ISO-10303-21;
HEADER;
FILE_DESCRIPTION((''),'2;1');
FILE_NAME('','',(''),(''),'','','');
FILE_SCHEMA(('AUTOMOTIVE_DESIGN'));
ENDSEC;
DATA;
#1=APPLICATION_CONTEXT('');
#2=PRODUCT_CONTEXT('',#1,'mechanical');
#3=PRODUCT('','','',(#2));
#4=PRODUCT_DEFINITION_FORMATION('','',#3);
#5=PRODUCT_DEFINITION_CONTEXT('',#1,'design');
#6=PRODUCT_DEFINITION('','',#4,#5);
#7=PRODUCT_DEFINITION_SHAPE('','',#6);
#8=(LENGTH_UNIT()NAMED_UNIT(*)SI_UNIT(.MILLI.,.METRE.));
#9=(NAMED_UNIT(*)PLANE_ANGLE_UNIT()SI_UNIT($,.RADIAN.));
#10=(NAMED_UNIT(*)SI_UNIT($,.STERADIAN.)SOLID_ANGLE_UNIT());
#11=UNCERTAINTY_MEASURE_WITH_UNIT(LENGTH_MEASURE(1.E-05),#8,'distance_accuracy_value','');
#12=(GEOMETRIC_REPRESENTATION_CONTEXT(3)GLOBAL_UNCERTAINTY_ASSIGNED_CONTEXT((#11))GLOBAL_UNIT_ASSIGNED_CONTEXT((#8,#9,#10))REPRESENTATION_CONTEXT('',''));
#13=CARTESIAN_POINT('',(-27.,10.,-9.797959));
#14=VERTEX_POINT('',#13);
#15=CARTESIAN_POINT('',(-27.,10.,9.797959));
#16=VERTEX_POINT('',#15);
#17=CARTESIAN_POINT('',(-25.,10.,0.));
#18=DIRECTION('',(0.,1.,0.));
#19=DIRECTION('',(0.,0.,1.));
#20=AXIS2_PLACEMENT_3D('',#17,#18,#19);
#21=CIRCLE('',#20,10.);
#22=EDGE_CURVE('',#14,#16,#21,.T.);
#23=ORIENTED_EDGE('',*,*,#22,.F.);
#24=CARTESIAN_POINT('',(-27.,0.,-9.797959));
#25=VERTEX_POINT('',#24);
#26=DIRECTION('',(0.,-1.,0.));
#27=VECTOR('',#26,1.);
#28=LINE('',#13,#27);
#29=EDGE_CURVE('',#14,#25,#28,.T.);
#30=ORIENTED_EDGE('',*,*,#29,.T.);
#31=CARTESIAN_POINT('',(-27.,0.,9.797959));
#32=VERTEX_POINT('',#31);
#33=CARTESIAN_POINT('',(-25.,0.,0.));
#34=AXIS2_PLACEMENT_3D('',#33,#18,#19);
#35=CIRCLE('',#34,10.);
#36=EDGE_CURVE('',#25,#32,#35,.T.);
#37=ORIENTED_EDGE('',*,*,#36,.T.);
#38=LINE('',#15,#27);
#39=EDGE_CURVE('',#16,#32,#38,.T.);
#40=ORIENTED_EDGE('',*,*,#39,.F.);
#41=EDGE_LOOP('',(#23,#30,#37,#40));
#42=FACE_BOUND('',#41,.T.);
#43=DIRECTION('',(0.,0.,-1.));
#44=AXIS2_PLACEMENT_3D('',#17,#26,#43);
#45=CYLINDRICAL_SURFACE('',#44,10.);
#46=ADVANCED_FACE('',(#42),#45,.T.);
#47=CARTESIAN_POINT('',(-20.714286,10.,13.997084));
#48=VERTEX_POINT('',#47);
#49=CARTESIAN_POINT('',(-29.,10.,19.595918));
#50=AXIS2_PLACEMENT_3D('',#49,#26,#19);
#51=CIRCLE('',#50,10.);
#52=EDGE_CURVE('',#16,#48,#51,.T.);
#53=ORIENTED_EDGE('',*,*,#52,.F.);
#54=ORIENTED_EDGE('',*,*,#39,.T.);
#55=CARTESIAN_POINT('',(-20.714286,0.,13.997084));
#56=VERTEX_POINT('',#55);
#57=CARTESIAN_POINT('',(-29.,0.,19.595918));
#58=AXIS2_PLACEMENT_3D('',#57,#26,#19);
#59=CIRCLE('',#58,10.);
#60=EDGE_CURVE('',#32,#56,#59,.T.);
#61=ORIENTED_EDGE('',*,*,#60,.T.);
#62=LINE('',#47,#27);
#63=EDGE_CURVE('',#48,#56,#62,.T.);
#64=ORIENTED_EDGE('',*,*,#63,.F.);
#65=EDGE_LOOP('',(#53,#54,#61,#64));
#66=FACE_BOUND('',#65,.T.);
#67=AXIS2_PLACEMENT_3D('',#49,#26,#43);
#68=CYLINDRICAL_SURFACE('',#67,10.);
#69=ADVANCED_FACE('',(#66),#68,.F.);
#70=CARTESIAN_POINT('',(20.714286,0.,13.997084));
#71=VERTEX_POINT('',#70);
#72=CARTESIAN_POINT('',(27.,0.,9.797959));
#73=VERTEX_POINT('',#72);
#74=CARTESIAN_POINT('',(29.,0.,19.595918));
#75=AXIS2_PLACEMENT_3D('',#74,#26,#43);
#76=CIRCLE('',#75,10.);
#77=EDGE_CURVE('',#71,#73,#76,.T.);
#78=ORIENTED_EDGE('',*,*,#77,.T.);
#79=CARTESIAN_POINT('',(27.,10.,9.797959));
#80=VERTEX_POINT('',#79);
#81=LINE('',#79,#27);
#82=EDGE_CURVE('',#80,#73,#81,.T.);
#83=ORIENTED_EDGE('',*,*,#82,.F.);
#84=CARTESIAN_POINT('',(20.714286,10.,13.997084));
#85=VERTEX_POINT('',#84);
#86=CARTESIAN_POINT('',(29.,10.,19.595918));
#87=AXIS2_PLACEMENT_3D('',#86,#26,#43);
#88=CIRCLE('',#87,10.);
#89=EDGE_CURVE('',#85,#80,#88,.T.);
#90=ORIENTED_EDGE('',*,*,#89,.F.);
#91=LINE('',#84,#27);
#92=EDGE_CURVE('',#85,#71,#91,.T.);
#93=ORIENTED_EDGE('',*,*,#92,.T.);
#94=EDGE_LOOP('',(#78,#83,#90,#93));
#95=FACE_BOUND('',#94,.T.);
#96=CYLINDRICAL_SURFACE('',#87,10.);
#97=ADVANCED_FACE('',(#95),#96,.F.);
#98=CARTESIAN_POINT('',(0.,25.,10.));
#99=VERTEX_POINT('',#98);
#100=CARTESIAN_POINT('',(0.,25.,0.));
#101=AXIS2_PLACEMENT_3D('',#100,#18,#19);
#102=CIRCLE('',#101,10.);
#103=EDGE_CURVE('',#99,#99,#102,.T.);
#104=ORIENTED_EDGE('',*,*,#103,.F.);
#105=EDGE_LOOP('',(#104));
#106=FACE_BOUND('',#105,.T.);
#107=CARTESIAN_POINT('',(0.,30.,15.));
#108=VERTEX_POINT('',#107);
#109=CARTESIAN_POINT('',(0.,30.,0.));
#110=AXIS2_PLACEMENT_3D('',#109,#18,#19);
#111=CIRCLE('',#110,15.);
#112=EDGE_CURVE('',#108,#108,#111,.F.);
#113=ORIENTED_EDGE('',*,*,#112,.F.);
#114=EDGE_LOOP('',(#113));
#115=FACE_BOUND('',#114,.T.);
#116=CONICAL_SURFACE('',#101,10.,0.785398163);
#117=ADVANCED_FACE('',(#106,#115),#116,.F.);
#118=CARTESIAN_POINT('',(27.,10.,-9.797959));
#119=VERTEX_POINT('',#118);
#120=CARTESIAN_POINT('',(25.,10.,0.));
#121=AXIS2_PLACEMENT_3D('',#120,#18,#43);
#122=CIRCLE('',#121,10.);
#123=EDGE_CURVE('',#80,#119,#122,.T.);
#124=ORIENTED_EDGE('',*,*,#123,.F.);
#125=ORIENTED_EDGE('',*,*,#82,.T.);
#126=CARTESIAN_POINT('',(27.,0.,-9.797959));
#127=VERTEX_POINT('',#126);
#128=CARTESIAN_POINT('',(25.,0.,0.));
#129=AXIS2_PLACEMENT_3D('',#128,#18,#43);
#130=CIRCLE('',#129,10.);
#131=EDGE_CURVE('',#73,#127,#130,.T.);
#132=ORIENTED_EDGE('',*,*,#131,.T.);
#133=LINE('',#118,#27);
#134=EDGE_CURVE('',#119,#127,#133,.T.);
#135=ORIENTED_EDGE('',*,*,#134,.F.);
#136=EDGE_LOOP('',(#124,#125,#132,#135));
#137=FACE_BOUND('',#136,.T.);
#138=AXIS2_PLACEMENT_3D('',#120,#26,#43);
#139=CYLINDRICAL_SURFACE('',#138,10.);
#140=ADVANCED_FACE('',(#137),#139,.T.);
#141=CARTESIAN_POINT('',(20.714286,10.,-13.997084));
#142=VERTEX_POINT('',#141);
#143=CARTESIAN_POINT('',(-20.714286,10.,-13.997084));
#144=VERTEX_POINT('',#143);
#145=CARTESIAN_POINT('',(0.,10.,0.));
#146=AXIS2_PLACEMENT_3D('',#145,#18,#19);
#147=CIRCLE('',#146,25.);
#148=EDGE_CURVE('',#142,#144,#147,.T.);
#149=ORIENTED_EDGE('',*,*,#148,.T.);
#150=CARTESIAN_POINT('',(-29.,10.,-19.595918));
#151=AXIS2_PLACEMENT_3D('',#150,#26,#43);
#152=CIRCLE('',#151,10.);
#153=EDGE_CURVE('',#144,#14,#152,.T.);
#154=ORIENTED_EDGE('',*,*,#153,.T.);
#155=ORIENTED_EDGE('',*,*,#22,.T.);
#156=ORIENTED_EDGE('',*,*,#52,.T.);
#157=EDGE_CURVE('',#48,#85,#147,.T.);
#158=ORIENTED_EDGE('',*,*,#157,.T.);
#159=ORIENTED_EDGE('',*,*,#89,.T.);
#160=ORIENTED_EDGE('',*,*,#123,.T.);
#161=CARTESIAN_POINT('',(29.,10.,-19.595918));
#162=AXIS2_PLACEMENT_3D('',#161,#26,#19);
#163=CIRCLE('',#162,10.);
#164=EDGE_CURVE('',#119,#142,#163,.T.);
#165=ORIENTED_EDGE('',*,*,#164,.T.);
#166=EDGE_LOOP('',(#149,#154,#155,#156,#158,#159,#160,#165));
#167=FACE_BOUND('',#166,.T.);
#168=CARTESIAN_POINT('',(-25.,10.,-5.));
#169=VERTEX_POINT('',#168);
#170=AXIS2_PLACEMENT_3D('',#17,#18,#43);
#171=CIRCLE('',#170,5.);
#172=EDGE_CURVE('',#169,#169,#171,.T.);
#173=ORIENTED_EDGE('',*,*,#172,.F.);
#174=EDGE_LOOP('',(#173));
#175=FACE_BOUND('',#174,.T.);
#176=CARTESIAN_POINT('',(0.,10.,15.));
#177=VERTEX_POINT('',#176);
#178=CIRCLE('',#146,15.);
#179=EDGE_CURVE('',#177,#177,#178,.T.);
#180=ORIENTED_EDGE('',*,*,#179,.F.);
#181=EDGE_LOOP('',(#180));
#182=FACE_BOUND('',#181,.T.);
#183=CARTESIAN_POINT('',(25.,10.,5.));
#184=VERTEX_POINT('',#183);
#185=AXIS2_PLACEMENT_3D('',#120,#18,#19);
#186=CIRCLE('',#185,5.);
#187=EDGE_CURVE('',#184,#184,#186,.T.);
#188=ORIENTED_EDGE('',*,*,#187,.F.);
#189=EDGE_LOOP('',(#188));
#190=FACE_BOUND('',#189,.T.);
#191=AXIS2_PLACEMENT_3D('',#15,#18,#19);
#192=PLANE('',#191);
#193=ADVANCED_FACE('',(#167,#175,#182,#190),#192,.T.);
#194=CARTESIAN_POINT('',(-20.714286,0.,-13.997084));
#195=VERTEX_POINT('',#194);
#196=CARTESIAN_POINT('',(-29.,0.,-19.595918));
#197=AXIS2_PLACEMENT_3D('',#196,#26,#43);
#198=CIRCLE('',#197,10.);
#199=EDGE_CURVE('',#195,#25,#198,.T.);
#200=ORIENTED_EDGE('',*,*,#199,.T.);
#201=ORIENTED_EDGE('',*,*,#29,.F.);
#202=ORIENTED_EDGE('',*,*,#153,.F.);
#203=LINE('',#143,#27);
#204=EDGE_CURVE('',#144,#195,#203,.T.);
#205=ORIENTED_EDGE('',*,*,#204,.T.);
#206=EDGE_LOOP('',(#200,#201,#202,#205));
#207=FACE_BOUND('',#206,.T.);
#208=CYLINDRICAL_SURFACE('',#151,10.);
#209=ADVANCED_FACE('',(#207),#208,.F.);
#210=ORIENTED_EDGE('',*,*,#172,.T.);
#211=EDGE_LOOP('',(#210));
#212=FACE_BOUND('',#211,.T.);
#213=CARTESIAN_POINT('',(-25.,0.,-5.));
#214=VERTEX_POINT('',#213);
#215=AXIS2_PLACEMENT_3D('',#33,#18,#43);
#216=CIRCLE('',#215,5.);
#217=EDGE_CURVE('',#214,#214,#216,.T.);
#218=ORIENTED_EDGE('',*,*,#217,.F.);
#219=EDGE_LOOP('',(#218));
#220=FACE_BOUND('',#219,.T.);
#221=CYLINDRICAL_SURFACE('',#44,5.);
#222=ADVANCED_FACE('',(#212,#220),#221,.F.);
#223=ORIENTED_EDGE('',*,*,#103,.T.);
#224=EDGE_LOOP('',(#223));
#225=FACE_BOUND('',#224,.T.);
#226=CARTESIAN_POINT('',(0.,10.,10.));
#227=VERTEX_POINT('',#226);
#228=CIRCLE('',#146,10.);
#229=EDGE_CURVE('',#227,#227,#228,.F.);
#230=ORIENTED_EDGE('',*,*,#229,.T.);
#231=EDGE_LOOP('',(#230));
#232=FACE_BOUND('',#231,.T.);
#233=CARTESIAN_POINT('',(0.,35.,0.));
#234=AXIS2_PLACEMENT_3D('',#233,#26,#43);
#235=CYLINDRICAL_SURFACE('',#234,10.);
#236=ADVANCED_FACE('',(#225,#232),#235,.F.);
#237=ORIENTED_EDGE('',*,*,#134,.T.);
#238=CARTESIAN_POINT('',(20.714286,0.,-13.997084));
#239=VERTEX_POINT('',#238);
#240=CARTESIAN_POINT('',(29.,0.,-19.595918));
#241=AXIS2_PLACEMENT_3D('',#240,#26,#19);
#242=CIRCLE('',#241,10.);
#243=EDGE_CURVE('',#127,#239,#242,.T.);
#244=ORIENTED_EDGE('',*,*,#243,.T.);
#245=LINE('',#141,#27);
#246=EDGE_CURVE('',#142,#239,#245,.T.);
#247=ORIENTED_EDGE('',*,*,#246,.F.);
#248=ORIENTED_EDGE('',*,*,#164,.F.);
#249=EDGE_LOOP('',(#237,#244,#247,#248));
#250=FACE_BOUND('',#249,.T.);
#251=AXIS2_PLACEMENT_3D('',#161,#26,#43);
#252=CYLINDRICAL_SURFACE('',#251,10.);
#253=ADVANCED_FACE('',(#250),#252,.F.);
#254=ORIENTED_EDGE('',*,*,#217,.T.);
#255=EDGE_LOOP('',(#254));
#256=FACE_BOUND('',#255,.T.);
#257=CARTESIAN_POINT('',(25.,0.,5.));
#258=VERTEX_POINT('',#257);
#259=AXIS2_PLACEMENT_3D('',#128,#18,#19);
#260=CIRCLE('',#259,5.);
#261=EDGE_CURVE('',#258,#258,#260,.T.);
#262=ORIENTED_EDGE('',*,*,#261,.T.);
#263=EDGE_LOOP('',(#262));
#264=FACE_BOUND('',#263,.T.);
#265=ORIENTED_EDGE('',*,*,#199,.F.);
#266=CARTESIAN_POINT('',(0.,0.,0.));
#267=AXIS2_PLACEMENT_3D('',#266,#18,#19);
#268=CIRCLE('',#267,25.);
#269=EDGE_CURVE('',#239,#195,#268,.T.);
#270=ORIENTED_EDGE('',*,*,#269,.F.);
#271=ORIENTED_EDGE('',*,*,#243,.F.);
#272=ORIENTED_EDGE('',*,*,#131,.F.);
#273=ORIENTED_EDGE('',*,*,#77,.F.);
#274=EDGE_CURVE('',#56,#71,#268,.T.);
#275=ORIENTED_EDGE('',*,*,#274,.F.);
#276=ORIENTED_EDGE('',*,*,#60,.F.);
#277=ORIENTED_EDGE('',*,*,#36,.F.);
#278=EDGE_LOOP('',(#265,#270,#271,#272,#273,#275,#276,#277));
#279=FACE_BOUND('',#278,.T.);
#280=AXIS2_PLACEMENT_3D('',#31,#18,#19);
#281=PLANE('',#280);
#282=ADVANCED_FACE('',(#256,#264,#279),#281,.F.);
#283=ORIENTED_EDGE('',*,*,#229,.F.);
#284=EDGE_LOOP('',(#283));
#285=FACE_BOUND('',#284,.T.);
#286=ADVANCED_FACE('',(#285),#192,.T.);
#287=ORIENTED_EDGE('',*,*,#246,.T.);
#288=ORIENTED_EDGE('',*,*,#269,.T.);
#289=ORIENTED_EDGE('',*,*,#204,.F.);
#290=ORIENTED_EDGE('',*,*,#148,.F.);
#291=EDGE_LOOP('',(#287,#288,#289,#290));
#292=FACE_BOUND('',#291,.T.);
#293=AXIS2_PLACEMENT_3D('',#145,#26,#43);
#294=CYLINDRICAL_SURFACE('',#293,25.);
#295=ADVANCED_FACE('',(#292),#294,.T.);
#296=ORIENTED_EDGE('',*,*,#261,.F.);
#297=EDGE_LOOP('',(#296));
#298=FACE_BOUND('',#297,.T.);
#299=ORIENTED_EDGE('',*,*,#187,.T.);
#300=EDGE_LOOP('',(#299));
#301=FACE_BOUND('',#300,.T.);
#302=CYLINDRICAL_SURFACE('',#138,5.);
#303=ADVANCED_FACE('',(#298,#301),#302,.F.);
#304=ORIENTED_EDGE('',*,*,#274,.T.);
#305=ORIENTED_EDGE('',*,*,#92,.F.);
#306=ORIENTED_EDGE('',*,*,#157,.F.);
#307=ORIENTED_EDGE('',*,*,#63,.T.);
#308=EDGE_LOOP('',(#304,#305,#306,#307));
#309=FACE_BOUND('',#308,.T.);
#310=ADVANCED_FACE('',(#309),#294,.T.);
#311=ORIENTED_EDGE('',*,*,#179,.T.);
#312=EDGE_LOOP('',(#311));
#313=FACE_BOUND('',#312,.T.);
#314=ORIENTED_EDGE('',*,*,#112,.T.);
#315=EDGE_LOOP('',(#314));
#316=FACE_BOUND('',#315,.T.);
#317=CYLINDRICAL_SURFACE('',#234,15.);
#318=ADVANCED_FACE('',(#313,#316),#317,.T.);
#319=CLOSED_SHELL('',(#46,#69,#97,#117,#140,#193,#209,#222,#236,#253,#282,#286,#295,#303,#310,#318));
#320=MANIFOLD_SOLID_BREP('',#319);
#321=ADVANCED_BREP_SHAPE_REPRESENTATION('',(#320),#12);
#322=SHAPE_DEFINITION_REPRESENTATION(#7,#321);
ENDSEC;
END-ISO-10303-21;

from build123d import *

# Parameters (mm, degrees)
SKETCH1_R           = 5
BOSS_EXTRUDE1_DEPTH = 10
SKETCH2_R           = 15
SKETCH2_R_2         = 10
BOSS_EXTRUDE2_DEPTH = 25
CHAMFER2_SIZE       = 10


with BuildPart() as part:
    # Sketch1 → Boss-Extrude1 (new body)
    with BuildSketch(Plane(origin=(0, 0, 0), x_dir=(1, 0, 0), z_dir=(0, 1, 0))):
        with BuildLine():
            ThreePointArc((-20.714285714, -13.997084244), (0, -25), (20.714285714, -13.997084244))
            ThreePointArc((20.714285714, -13.997084244), (23.445079401, -11.280699536), (27, -9.797958971))
            ThreePointArc((27, -9.797958971), (35, 0), (27, 9.797958971))
            ThreePointArc((27, 9.797958971), (23.445079401, 11.280699536), (20.714285714, 13.997084244))
            ThreePointArc((20.714285714, 13.997084244), (0, 25), (-20.714285714, 13.997084244))
            ThreePointArc((-20.714285714, 13.997084244), (-23.445079401, 11.280699536), (-27, 9.797958971))
            ThreePointArc((-27, 9.797958971), (-35, 0), (-27, -9.797958971))
            ThreePointArc((-27, -9.797958971), (-23.445079401, -11.280699536), (-20.714285714, -13.997084244))
        make_face()
        with Locations(Location((25, 0, 0), (0, 0, 270))):
            Circle(SKETCH1_R, mode=Mode.SUBTRACT)
        with Locations(Location((-25, 0, 0), (0, 0, 90))):
            Circle(SKETCH1_R, mode=Mode.SUBTRACT)
    extrude(amount=BOSS_EXTRUDE1_DEPTH)

    # Sketch2 → Boss-Extrude2 (add)
    with BuildSketch(Plane(origin=(0, 10, 0), x_dir=(1, 0, 0), z_dir=(0, 1, 0))):
        with Locations(Location((0, 0, 0), (0, 0, 270))):
            Circle(SKETCH2_R)
        with Locations(Location((0, 0, 0), (0, 0, 270))):
            Circle(SKETCH2_R_2, mode=Mode.SUBTRACT)
    extrude(amount=BOSS_EXTRUDE2_DEPTH)

    # Chamfer2
    # the kernel refuses this chamfer: 10 mm, written as the material it takes off along each edge
    with BuildSketch(Plane(origin=(0, 35, 0), x_dir=(0, 0, 1), z_dir=(-1, 0, 0))) as chamfer2_piece_1:
        Polygon((10 + CHAMFER2_SIZE, 0), (10, -CHAMFER2_SIZE), (10, 0), align=None)
    revolve(axis=Axis((0, 35, 0), (0, 1, 0)), mode=Mode.SUBTRACT)


solid = part.part
